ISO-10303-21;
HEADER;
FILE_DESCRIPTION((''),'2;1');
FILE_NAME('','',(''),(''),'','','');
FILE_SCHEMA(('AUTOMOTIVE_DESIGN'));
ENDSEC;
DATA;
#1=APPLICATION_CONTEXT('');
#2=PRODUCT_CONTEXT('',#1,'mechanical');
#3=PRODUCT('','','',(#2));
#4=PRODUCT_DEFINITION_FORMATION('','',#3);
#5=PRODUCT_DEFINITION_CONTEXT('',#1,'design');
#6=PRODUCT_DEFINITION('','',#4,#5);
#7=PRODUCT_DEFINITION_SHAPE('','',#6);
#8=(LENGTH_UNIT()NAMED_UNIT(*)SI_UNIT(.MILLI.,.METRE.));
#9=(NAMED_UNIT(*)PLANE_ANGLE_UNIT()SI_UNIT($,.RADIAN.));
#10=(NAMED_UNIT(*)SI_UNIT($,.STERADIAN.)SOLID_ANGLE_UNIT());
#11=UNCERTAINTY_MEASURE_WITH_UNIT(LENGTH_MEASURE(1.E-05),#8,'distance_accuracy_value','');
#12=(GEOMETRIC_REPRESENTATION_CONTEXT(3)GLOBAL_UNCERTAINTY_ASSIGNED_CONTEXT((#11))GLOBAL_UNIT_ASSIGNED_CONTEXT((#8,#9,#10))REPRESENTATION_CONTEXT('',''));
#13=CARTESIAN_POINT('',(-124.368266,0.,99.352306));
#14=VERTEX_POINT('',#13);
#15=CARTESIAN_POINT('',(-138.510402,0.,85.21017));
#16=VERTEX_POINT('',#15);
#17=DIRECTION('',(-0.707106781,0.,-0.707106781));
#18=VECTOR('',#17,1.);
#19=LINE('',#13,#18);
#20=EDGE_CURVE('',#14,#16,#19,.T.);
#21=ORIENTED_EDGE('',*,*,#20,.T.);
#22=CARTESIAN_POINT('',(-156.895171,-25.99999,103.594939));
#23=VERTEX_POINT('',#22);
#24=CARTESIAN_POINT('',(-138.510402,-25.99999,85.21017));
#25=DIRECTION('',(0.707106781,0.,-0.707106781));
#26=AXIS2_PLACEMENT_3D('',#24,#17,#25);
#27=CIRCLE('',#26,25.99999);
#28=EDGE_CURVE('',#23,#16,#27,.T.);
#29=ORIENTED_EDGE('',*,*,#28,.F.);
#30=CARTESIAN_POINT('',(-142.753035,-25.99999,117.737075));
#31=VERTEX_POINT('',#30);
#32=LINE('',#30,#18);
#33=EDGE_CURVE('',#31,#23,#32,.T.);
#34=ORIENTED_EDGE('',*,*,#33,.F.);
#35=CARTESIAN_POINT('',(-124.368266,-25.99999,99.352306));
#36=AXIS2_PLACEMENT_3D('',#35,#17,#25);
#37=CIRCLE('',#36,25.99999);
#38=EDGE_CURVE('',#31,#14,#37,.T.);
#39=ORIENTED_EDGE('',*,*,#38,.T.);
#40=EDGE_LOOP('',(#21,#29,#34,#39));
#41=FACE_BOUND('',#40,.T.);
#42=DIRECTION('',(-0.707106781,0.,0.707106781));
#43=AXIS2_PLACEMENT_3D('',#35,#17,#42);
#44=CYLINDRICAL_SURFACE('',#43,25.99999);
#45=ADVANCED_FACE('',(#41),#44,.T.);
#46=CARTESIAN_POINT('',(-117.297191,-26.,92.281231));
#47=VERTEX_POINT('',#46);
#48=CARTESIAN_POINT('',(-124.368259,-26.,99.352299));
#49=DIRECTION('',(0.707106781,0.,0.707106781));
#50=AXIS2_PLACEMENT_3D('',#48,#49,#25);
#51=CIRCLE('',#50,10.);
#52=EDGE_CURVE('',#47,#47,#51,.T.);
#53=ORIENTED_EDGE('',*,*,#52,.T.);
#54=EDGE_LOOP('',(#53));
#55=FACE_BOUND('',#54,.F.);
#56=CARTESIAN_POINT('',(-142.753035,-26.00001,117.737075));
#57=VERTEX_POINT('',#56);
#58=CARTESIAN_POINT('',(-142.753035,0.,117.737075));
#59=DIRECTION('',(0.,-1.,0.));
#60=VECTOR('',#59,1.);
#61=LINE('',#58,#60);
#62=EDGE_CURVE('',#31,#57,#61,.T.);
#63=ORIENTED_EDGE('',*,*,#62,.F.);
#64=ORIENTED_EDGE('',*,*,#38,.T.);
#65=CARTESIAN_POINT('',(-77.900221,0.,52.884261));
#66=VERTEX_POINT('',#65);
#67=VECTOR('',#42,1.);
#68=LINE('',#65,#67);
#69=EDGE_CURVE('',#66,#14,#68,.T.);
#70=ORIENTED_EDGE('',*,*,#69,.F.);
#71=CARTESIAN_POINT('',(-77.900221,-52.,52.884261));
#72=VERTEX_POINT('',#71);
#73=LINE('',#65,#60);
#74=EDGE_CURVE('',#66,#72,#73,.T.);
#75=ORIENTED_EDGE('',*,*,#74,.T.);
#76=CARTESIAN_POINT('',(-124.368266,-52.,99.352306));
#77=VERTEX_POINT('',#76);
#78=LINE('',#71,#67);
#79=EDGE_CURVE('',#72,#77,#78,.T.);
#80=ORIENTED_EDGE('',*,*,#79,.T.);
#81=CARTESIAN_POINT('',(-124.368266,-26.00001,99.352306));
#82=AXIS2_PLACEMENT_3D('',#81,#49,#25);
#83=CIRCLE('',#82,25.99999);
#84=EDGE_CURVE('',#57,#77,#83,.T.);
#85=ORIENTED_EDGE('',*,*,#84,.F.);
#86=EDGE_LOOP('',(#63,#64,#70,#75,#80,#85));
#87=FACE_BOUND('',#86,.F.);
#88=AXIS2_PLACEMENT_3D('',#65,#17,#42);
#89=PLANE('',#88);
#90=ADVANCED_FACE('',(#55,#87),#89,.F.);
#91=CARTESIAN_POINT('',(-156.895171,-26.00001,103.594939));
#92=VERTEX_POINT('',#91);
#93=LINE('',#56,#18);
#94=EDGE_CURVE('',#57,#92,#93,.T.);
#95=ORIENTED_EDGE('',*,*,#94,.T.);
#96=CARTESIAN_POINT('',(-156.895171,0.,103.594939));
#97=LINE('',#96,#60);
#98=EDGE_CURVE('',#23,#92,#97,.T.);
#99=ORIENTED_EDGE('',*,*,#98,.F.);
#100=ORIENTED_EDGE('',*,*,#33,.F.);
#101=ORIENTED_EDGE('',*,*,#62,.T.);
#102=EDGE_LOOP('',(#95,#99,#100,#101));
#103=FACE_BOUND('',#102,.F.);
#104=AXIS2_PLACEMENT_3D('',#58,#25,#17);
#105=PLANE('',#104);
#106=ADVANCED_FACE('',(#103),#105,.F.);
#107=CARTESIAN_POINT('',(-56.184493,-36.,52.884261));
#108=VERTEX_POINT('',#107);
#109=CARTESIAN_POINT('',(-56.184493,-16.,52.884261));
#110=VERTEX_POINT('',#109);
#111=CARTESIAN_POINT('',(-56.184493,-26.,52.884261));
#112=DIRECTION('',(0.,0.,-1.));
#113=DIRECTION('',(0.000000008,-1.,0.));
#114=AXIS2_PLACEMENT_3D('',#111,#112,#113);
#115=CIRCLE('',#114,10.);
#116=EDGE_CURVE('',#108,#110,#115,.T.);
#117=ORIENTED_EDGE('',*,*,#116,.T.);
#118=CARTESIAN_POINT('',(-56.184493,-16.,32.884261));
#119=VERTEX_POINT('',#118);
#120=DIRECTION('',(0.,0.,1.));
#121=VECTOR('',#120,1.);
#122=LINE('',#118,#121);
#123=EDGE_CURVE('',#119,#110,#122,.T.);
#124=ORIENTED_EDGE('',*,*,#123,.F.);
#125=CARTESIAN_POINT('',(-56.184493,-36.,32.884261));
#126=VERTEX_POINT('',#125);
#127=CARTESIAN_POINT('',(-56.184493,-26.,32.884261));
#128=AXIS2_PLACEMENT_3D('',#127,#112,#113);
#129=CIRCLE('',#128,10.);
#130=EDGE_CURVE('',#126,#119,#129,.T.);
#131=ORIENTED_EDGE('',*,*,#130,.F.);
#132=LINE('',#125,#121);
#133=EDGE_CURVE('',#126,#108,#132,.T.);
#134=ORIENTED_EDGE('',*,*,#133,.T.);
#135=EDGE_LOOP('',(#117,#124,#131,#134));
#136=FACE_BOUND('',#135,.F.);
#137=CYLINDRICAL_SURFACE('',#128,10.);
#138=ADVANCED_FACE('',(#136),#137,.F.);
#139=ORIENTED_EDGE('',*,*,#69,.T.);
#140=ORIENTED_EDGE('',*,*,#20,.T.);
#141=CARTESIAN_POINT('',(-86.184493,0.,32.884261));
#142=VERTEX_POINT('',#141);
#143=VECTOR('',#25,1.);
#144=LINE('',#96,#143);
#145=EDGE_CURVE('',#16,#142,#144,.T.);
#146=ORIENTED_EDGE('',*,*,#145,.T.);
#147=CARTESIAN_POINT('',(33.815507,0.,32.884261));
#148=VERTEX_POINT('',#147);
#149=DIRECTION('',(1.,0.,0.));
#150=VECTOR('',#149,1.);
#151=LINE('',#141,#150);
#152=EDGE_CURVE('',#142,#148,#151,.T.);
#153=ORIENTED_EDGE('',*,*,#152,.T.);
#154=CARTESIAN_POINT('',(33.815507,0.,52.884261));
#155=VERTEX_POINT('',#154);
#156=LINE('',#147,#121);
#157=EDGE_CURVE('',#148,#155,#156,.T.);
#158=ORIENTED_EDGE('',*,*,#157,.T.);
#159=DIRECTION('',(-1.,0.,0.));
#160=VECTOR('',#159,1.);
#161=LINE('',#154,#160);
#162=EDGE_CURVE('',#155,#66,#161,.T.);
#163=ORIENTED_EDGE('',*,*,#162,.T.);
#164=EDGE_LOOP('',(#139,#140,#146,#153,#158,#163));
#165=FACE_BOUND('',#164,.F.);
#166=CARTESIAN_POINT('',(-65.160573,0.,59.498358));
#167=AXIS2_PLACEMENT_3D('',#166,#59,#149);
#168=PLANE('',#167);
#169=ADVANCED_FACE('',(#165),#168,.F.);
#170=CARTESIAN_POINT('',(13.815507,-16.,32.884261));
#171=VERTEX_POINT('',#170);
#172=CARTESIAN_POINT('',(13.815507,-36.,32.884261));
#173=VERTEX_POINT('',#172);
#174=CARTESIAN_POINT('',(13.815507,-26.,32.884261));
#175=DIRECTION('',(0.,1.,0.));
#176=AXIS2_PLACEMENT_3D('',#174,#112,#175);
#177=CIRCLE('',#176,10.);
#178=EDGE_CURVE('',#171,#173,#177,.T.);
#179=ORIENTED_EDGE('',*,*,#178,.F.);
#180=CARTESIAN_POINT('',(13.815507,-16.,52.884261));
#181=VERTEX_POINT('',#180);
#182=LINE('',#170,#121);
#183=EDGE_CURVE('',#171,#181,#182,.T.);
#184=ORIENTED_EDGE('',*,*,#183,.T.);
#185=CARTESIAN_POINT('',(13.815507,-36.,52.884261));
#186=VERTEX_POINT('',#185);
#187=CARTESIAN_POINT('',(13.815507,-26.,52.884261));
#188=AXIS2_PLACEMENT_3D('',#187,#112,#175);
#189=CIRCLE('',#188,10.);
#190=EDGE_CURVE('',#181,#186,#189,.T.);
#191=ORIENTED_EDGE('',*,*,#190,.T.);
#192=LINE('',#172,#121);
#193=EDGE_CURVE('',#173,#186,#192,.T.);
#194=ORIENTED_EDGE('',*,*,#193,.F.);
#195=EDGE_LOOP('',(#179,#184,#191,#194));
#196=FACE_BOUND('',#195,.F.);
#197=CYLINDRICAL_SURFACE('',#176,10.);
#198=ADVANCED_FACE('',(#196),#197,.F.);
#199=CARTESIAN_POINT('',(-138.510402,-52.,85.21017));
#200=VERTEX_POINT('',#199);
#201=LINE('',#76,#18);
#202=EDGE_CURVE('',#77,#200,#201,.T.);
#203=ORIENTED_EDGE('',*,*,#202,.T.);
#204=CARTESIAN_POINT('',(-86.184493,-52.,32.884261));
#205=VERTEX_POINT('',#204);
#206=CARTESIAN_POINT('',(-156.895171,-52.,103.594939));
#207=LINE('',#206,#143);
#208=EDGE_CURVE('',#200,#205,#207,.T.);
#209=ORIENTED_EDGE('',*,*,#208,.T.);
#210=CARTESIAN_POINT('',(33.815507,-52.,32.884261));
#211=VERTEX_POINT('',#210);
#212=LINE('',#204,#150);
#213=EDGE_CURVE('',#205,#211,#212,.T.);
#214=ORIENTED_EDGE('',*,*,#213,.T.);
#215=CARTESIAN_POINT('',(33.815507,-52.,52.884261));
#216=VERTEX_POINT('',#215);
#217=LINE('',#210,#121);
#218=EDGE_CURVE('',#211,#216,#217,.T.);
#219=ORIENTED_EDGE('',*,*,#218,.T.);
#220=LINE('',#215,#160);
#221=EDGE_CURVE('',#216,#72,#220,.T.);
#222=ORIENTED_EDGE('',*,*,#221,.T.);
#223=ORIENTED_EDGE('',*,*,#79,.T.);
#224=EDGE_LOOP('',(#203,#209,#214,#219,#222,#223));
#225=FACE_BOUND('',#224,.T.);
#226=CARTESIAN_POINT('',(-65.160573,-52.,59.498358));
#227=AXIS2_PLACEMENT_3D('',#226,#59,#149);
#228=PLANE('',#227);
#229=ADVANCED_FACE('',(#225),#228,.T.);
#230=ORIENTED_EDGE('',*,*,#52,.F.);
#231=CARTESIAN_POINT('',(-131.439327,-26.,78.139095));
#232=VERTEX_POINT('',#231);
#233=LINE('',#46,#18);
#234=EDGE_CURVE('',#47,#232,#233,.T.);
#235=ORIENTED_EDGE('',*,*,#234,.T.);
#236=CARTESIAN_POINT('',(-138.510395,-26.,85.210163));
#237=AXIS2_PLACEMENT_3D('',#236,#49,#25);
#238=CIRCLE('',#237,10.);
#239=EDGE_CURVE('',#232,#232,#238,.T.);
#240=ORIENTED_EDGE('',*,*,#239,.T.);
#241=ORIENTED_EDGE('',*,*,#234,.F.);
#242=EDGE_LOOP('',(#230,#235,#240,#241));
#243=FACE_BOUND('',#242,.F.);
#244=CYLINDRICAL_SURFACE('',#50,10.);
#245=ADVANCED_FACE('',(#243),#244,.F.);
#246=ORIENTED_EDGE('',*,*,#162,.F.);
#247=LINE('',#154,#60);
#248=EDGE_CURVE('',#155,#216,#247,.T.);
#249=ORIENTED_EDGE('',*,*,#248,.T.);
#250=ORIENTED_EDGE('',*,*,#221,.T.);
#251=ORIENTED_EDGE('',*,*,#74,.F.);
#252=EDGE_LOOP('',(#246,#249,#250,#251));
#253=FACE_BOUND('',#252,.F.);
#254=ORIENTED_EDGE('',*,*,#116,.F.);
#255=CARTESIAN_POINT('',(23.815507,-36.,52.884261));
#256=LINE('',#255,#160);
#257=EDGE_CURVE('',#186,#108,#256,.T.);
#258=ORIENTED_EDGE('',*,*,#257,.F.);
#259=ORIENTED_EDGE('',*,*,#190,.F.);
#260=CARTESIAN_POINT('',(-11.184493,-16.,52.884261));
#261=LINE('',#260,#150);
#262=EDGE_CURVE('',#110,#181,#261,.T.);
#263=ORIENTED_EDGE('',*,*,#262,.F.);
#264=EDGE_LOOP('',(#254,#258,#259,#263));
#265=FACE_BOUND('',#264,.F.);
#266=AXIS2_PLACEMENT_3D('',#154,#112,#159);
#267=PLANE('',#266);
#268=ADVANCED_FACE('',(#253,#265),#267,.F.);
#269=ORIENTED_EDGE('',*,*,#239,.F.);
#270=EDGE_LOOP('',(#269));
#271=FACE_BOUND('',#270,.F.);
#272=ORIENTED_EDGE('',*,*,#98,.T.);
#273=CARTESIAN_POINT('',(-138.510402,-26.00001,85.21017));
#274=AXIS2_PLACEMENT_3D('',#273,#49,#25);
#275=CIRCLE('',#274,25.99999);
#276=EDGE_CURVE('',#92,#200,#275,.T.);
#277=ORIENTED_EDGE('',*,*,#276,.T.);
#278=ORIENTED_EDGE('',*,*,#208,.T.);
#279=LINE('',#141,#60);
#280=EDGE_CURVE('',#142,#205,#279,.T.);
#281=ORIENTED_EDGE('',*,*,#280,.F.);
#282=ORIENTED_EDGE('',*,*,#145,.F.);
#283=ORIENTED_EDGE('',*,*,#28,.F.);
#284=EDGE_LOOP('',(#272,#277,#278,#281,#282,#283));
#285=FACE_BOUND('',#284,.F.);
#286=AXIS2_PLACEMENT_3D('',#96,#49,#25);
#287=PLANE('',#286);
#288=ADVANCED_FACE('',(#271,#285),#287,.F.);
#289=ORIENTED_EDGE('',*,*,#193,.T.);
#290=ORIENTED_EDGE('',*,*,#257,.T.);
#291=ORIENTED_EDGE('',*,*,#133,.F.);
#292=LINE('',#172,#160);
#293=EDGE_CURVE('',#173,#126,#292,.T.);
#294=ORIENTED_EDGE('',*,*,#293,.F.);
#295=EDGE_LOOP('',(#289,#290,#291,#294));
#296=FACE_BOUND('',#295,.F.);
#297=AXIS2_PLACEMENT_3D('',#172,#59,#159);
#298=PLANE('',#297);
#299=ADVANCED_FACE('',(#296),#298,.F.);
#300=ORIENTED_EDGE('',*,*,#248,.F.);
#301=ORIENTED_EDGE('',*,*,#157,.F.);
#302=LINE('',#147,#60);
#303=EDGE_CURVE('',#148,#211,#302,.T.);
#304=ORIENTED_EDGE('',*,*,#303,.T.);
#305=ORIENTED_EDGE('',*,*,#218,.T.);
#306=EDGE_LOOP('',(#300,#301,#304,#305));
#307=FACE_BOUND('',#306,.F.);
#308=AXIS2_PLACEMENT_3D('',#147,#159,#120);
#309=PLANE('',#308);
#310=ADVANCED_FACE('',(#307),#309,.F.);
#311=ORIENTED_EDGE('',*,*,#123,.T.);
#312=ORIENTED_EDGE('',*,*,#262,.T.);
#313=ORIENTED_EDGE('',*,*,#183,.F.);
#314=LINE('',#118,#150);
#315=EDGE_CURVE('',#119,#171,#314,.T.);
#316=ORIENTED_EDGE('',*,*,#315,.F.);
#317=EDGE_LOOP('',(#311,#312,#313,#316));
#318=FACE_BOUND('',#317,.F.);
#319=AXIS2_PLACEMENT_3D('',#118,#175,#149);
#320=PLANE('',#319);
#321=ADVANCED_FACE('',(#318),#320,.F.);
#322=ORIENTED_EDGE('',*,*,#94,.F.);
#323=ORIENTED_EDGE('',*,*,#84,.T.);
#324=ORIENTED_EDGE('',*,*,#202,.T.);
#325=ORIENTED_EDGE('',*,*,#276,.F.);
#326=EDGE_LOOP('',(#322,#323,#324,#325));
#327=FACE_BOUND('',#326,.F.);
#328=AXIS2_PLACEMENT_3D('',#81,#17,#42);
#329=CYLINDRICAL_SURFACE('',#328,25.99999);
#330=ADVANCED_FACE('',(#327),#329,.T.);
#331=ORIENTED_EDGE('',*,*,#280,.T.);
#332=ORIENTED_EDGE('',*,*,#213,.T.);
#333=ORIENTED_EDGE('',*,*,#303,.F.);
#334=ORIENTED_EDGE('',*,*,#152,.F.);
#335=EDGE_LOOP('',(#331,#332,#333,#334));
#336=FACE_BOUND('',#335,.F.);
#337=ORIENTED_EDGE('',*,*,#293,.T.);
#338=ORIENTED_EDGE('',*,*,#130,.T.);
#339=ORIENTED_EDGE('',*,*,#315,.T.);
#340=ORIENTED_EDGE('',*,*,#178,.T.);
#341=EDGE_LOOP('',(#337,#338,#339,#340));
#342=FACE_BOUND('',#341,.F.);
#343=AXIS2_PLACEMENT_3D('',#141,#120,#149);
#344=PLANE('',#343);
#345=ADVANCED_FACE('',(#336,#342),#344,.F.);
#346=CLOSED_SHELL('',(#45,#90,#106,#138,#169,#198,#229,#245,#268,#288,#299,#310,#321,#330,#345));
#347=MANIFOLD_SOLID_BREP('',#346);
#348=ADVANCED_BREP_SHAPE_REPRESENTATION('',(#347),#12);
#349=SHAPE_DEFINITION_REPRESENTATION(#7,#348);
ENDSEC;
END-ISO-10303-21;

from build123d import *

# Parameters (mm, degrees)
F1_DEPTH = 52
F2_R     = 25.99999
F4_DEPTH = 26
F5_R     = 10
F6_DEPTH = 25


# Not quite as in the source:
# - a fillet or chamfer is up to 0.001 mm smaller than in the source, because OpenCascade refuses the exact size


with BuildPart() as f1:
    # F0 (on Front) → F1 (new body)
    with BuildSketch(Plane.XZ):
        Polygon((-156.8951708629, 103.594939314), (-86.1844927443, 32.8842611954), (33.8155072557, 32.8842611954), (33.8155072557, 52.8842611954), (-77.9002214968, 52.8842611954), (-142.7530352392, 117.7370749377), align=None)
    extrude(amount=F1_DEPTH)

    # F2 (radius 26 in the source; OpenCascade refuses exactly that, so slightly less here)
    f2_edges = [f1.edges().sort_by_distance(p)[0] for p in [
        (-149.824103, -52, 110.666007),
        (-149.824103, 0, 110.666007),
    ]]
    fillet(f2_edges, radius=F2_R)

    # F3 (on face) → F4 (cut)
    with BuildSketch(Plane(origin=(0, 0, 32.8842611954), x_dir=(1, 0, 0), z_dir=(0, 0, -1))):
        with BuildLine():
            ThreePointArc((-56.184492662, 36), (-66.1844927443, 26), (-56.184492662, 16))
            Line((-56.184492662, 16), (13.8155072557, 16))
            ThreePointArc((13.8155072557, 16), (23.8155072557, 26), (13.8155072557, 36))
            Line((13.8155072557, 36), (-56.184492662, 36))
        make_face()
    extrude(amount=-F4_DEPTH, mode=Mode.SUBTRACT)

    # F5 (on face) → F6 (cut)
    with BuildSketch(Plane(origin=(-12.5079801507, 0, -12.5079801507), x_dir=(0.7071067812, 0, -0.7071067812), z_dir=(0.7071067812, 0, 0.7071067812))):
        with Locations((-158.1943233382, -26)):
            Circle(F5_R)
    extrude(amount=-F6_DEPTH, mode=Mode.SUBTRACT)


solid = f1.part
